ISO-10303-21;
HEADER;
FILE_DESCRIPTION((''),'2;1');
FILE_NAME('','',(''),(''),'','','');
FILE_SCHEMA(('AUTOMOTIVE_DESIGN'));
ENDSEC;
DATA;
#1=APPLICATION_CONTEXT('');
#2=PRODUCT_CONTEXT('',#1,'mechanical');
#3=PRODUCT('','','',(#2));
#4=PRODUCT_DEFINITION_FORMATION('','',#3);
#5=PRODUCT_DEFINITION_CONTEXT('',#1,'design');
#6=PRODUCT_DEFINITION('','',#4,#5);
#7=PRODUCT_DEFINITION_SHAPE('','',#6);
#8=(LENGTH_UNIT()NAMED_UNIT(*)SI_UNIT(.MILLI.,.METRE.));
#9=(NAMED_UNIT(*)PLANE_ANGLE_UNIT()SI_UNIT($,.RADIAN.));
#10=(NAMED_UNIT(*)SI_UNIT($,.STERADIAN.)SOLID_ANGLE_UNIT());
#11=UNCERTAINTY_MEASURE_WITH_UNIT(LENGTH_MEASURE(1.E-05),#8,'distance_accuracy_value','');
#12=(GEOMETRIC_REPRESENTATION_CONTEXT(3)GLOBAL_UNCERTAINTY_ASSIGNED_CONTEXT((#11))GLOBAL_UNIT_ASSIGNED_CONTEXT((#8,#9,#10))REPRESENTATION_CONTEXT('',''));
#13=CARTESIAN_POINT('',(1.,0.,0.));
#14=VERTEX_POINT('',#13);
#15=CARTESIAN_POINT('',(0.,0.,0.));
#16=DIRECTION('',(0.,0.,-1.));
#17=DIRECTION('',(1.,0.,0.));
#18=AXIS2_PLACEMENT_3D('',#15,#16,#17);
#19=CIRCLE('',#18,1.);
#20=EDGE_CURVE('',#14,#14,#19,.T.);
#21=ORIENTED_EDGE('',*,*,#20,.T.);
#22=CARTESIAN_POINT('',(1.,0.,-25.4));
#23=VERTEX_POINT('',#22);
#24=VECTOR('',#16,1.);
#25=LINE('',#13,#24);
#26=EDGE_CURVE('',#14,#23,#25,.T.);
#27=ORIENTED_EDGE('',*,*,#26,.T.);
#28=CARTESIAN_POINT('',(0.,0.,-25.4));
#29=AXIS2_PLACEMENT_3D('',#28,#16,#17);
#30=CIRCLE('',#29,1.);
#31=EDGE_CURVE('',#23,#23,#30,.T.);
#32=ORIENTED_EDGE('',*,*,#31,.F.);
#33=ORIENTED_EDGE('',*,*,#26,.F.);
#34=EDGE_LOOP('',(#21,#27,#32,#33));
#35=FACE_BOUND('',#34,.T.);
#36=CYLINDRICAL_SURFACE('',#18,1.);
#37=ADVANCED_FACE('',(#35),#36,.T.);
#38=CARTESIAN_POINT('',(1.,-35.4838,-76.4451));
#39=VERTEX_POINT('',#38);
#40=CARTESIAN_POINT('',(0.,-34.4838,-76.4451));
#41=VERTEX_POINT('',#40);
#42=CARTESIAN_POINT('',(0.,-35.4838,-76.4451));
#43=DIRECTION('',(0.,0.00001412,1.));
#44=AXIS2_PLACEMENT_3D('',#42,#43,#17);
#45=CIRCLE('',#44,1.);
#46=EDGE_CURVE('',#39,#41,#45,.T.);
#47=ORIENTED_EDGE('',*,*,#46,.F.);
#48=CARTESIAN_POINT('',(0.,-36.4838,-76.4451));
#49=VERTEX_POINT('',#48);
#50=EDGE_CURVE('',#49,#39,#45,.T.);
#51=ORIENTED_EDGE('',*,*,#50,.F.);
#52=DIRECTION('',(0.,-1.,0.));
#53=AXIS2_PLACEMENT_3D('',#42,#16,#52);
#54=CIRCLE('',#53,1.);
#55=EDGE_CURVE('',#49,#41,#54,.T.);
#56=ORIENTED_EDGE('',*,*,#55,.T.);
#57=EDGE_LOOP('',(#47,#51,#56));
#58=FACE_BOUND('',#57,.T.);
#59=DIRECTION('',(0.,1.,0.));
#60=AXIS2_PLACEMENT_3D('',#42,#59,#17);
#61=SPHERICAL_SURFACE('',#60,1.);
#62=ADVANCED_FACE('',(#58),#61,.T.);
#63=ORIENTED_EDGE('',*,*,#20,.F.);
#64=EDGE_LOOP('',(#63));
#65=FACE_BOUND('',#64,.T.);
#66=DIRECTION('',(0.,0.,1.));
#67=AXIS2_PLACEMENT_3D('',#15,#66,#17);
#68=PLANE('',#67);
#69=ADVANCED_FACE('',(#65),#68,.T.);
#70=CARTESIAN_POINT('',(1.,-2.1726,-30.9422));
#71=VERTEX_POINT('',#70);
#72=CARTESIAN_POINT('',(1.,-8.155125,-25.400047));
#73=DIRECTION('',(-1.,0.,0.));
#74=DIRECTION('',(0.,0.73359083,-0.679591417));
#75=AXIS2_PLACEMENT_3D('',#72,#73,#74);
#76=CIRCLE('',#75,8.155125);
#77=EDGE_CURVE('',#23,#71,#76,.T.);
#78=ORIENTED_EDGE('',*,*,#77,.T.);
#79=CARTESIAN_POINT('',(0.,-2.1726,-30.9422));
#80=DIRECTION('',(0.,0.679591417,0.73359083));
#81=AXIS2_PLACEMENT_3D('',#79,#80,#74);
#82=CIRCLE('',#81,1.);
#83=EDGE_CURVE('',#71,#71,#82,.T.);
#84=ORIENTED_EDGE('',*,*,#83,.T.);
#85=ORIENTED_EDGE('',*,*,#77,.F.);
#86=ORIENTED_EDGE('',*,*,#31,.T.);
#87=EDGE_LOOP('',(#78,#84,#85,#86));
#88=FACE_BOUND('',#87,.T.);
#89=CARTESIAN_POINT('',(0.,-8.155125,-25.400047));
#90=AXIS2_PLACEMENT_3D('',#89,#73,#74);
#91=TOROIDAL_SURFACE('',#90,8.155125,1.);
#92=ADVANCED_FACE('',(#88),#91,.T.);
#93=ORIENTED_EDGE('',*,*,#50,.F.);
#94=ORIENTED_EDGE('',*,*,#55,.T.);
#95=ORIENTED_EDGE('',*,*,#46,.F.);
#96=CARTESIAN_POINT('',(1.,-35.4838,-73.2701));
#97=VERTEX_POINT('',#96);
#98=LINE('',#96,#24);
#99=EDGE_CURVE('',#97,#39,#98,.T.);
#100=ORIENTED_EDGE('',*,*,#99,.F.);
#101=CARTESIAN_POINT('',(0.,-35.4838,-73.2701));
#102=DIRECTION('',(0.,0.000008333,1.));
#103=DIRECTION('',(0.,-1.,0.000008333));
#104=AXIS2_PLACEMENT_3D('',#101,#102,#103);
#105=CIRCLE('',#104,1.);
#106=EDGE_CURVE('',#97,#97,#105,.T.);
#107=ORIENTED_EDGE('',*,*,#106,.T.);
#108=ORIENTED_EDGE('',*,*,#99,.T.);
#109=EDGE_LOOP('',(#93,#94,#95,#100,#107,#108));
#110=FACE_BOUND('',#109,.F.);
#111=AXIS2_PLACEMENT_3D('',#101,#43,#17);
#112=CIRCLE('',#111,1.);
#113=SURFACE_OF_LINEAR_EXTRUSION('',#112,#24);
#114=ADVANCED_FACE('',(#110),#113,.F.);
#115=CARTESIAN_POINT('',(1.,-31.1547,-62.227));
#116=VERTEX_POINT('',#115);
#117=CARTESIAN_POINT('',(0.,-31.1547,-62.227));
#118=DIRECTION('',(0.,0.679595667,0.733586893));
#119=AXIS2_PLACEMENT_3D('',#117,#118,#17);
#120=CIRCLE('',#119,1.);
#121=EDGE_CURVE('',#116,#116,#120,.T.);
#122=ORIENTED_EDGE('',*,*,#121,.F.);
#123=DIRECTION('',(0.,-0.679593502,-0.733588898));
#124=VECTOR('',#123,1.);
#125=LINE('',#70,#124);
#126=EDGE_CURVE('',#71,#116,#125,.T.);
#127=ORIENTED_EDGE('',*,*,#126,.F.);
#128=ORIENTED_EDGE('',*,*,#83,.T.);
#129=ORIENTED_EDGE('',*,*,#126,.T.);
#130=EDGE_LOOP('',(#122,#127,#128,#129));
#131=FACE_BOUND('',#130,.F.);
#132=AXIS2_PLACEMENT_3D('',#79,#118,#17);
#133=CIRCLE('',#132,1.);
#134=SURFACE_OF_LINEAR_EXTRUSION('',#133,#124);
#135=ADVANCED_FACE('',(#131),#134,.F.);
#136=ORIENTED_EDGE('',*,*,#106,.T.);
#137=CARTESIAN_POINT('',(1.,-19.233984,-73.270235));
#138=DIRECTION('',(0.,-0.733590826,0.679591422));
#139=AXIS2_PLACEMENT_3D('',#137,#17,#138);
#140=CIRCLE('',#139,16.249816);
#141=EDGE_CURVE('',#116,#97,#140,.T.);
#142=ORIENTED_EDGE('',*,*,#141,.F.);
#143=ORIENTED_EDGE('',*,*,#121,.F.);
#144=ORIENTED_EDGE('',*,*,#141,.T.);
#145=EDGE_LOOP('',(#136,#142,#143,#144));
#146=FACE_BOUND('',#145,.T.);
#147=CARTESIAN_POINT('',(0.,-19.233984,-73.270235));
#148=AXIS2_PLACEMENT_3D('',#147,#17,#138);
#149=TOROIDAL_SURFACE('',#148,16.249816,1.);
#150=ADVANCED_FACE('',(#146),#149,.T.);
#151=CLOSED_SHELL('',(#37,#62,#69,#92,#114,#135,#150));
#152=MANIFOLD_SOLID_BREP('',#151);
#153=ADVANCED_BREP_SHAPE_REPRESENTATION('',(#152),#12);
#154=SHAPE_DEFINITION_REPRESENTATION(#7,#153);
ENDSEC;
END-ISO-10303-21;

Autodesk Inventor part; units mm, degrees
ref_plane "YZ Plane" through (0, 0, 0) normal (1, 0, 0) x (0, 1, 0)
ref_plane "XZ Plane" through (0, 0, 0) normal (0, 1, 0) x (-1, 0, 0)
ref_plane "XY Plane" through (0, 0, 0) normal (0, 0, 1) x (1, 0, 0)
sketch "Sketch2" plane through (0, 0, 0) normal (1, 0, 0) x (0, 1, 0)
  line L0 (0, 0) -> (0, -25.4)
  arc A0 (-2.1726, -30.9422) -> (0, -25.4) centre (-8.1552, -25.4) ccw
  line L1 (-2.1726, -30.9422) -> (-31.1547, -62.227)
  arc A1 (-31.1547, -62.227) -> (-35.4838, -73.2701) centre (-19.2342, -73.2701) ccw
  line L2 (-35.4838, -73.2701) -> (-35.4838, -76.4451)
  dimension "d3" = 25.4
  dimension "d4" = 8.1552
  dimension "d5" = 16.2496
  dimension "d6" = 3.175
  dimension "d7" = 35.4838
sketch "Sketch3" plane through (0, 0, 0) normal (0, 0, 1) x (1, 0, 0)
  circle A0 centre (0, 0) radius 1
  dimension "d8" = 2
sweep "Sweep1" add profiles "Sketch3" path "Sketch2"
sketch "Sketch4" plane through (0, 0, 0) normal (1, 0, 0) x (0, 1, 0)
  line L0 (-36.4838, -76.4451) -> (-34.4838, -76.4451) projected
  line L1 (-34.4838, -73.2701) -> (-34.4838, -76.4451) projected
  arc A0 (-36.4838, -76.4451) -> (-34.4838, -76.4451) centre (-35.4838, -76.4451) ccw
  point P0 (0, 0)
revolve "Revolution1" add sketch "Sketch4" angle 180 mid plane about axis through (0, -36.4838, -76.4451) along (0, 1, 0)
properties part number "2mmToRudder" material "Brass, Soft Yellow, Welded"
